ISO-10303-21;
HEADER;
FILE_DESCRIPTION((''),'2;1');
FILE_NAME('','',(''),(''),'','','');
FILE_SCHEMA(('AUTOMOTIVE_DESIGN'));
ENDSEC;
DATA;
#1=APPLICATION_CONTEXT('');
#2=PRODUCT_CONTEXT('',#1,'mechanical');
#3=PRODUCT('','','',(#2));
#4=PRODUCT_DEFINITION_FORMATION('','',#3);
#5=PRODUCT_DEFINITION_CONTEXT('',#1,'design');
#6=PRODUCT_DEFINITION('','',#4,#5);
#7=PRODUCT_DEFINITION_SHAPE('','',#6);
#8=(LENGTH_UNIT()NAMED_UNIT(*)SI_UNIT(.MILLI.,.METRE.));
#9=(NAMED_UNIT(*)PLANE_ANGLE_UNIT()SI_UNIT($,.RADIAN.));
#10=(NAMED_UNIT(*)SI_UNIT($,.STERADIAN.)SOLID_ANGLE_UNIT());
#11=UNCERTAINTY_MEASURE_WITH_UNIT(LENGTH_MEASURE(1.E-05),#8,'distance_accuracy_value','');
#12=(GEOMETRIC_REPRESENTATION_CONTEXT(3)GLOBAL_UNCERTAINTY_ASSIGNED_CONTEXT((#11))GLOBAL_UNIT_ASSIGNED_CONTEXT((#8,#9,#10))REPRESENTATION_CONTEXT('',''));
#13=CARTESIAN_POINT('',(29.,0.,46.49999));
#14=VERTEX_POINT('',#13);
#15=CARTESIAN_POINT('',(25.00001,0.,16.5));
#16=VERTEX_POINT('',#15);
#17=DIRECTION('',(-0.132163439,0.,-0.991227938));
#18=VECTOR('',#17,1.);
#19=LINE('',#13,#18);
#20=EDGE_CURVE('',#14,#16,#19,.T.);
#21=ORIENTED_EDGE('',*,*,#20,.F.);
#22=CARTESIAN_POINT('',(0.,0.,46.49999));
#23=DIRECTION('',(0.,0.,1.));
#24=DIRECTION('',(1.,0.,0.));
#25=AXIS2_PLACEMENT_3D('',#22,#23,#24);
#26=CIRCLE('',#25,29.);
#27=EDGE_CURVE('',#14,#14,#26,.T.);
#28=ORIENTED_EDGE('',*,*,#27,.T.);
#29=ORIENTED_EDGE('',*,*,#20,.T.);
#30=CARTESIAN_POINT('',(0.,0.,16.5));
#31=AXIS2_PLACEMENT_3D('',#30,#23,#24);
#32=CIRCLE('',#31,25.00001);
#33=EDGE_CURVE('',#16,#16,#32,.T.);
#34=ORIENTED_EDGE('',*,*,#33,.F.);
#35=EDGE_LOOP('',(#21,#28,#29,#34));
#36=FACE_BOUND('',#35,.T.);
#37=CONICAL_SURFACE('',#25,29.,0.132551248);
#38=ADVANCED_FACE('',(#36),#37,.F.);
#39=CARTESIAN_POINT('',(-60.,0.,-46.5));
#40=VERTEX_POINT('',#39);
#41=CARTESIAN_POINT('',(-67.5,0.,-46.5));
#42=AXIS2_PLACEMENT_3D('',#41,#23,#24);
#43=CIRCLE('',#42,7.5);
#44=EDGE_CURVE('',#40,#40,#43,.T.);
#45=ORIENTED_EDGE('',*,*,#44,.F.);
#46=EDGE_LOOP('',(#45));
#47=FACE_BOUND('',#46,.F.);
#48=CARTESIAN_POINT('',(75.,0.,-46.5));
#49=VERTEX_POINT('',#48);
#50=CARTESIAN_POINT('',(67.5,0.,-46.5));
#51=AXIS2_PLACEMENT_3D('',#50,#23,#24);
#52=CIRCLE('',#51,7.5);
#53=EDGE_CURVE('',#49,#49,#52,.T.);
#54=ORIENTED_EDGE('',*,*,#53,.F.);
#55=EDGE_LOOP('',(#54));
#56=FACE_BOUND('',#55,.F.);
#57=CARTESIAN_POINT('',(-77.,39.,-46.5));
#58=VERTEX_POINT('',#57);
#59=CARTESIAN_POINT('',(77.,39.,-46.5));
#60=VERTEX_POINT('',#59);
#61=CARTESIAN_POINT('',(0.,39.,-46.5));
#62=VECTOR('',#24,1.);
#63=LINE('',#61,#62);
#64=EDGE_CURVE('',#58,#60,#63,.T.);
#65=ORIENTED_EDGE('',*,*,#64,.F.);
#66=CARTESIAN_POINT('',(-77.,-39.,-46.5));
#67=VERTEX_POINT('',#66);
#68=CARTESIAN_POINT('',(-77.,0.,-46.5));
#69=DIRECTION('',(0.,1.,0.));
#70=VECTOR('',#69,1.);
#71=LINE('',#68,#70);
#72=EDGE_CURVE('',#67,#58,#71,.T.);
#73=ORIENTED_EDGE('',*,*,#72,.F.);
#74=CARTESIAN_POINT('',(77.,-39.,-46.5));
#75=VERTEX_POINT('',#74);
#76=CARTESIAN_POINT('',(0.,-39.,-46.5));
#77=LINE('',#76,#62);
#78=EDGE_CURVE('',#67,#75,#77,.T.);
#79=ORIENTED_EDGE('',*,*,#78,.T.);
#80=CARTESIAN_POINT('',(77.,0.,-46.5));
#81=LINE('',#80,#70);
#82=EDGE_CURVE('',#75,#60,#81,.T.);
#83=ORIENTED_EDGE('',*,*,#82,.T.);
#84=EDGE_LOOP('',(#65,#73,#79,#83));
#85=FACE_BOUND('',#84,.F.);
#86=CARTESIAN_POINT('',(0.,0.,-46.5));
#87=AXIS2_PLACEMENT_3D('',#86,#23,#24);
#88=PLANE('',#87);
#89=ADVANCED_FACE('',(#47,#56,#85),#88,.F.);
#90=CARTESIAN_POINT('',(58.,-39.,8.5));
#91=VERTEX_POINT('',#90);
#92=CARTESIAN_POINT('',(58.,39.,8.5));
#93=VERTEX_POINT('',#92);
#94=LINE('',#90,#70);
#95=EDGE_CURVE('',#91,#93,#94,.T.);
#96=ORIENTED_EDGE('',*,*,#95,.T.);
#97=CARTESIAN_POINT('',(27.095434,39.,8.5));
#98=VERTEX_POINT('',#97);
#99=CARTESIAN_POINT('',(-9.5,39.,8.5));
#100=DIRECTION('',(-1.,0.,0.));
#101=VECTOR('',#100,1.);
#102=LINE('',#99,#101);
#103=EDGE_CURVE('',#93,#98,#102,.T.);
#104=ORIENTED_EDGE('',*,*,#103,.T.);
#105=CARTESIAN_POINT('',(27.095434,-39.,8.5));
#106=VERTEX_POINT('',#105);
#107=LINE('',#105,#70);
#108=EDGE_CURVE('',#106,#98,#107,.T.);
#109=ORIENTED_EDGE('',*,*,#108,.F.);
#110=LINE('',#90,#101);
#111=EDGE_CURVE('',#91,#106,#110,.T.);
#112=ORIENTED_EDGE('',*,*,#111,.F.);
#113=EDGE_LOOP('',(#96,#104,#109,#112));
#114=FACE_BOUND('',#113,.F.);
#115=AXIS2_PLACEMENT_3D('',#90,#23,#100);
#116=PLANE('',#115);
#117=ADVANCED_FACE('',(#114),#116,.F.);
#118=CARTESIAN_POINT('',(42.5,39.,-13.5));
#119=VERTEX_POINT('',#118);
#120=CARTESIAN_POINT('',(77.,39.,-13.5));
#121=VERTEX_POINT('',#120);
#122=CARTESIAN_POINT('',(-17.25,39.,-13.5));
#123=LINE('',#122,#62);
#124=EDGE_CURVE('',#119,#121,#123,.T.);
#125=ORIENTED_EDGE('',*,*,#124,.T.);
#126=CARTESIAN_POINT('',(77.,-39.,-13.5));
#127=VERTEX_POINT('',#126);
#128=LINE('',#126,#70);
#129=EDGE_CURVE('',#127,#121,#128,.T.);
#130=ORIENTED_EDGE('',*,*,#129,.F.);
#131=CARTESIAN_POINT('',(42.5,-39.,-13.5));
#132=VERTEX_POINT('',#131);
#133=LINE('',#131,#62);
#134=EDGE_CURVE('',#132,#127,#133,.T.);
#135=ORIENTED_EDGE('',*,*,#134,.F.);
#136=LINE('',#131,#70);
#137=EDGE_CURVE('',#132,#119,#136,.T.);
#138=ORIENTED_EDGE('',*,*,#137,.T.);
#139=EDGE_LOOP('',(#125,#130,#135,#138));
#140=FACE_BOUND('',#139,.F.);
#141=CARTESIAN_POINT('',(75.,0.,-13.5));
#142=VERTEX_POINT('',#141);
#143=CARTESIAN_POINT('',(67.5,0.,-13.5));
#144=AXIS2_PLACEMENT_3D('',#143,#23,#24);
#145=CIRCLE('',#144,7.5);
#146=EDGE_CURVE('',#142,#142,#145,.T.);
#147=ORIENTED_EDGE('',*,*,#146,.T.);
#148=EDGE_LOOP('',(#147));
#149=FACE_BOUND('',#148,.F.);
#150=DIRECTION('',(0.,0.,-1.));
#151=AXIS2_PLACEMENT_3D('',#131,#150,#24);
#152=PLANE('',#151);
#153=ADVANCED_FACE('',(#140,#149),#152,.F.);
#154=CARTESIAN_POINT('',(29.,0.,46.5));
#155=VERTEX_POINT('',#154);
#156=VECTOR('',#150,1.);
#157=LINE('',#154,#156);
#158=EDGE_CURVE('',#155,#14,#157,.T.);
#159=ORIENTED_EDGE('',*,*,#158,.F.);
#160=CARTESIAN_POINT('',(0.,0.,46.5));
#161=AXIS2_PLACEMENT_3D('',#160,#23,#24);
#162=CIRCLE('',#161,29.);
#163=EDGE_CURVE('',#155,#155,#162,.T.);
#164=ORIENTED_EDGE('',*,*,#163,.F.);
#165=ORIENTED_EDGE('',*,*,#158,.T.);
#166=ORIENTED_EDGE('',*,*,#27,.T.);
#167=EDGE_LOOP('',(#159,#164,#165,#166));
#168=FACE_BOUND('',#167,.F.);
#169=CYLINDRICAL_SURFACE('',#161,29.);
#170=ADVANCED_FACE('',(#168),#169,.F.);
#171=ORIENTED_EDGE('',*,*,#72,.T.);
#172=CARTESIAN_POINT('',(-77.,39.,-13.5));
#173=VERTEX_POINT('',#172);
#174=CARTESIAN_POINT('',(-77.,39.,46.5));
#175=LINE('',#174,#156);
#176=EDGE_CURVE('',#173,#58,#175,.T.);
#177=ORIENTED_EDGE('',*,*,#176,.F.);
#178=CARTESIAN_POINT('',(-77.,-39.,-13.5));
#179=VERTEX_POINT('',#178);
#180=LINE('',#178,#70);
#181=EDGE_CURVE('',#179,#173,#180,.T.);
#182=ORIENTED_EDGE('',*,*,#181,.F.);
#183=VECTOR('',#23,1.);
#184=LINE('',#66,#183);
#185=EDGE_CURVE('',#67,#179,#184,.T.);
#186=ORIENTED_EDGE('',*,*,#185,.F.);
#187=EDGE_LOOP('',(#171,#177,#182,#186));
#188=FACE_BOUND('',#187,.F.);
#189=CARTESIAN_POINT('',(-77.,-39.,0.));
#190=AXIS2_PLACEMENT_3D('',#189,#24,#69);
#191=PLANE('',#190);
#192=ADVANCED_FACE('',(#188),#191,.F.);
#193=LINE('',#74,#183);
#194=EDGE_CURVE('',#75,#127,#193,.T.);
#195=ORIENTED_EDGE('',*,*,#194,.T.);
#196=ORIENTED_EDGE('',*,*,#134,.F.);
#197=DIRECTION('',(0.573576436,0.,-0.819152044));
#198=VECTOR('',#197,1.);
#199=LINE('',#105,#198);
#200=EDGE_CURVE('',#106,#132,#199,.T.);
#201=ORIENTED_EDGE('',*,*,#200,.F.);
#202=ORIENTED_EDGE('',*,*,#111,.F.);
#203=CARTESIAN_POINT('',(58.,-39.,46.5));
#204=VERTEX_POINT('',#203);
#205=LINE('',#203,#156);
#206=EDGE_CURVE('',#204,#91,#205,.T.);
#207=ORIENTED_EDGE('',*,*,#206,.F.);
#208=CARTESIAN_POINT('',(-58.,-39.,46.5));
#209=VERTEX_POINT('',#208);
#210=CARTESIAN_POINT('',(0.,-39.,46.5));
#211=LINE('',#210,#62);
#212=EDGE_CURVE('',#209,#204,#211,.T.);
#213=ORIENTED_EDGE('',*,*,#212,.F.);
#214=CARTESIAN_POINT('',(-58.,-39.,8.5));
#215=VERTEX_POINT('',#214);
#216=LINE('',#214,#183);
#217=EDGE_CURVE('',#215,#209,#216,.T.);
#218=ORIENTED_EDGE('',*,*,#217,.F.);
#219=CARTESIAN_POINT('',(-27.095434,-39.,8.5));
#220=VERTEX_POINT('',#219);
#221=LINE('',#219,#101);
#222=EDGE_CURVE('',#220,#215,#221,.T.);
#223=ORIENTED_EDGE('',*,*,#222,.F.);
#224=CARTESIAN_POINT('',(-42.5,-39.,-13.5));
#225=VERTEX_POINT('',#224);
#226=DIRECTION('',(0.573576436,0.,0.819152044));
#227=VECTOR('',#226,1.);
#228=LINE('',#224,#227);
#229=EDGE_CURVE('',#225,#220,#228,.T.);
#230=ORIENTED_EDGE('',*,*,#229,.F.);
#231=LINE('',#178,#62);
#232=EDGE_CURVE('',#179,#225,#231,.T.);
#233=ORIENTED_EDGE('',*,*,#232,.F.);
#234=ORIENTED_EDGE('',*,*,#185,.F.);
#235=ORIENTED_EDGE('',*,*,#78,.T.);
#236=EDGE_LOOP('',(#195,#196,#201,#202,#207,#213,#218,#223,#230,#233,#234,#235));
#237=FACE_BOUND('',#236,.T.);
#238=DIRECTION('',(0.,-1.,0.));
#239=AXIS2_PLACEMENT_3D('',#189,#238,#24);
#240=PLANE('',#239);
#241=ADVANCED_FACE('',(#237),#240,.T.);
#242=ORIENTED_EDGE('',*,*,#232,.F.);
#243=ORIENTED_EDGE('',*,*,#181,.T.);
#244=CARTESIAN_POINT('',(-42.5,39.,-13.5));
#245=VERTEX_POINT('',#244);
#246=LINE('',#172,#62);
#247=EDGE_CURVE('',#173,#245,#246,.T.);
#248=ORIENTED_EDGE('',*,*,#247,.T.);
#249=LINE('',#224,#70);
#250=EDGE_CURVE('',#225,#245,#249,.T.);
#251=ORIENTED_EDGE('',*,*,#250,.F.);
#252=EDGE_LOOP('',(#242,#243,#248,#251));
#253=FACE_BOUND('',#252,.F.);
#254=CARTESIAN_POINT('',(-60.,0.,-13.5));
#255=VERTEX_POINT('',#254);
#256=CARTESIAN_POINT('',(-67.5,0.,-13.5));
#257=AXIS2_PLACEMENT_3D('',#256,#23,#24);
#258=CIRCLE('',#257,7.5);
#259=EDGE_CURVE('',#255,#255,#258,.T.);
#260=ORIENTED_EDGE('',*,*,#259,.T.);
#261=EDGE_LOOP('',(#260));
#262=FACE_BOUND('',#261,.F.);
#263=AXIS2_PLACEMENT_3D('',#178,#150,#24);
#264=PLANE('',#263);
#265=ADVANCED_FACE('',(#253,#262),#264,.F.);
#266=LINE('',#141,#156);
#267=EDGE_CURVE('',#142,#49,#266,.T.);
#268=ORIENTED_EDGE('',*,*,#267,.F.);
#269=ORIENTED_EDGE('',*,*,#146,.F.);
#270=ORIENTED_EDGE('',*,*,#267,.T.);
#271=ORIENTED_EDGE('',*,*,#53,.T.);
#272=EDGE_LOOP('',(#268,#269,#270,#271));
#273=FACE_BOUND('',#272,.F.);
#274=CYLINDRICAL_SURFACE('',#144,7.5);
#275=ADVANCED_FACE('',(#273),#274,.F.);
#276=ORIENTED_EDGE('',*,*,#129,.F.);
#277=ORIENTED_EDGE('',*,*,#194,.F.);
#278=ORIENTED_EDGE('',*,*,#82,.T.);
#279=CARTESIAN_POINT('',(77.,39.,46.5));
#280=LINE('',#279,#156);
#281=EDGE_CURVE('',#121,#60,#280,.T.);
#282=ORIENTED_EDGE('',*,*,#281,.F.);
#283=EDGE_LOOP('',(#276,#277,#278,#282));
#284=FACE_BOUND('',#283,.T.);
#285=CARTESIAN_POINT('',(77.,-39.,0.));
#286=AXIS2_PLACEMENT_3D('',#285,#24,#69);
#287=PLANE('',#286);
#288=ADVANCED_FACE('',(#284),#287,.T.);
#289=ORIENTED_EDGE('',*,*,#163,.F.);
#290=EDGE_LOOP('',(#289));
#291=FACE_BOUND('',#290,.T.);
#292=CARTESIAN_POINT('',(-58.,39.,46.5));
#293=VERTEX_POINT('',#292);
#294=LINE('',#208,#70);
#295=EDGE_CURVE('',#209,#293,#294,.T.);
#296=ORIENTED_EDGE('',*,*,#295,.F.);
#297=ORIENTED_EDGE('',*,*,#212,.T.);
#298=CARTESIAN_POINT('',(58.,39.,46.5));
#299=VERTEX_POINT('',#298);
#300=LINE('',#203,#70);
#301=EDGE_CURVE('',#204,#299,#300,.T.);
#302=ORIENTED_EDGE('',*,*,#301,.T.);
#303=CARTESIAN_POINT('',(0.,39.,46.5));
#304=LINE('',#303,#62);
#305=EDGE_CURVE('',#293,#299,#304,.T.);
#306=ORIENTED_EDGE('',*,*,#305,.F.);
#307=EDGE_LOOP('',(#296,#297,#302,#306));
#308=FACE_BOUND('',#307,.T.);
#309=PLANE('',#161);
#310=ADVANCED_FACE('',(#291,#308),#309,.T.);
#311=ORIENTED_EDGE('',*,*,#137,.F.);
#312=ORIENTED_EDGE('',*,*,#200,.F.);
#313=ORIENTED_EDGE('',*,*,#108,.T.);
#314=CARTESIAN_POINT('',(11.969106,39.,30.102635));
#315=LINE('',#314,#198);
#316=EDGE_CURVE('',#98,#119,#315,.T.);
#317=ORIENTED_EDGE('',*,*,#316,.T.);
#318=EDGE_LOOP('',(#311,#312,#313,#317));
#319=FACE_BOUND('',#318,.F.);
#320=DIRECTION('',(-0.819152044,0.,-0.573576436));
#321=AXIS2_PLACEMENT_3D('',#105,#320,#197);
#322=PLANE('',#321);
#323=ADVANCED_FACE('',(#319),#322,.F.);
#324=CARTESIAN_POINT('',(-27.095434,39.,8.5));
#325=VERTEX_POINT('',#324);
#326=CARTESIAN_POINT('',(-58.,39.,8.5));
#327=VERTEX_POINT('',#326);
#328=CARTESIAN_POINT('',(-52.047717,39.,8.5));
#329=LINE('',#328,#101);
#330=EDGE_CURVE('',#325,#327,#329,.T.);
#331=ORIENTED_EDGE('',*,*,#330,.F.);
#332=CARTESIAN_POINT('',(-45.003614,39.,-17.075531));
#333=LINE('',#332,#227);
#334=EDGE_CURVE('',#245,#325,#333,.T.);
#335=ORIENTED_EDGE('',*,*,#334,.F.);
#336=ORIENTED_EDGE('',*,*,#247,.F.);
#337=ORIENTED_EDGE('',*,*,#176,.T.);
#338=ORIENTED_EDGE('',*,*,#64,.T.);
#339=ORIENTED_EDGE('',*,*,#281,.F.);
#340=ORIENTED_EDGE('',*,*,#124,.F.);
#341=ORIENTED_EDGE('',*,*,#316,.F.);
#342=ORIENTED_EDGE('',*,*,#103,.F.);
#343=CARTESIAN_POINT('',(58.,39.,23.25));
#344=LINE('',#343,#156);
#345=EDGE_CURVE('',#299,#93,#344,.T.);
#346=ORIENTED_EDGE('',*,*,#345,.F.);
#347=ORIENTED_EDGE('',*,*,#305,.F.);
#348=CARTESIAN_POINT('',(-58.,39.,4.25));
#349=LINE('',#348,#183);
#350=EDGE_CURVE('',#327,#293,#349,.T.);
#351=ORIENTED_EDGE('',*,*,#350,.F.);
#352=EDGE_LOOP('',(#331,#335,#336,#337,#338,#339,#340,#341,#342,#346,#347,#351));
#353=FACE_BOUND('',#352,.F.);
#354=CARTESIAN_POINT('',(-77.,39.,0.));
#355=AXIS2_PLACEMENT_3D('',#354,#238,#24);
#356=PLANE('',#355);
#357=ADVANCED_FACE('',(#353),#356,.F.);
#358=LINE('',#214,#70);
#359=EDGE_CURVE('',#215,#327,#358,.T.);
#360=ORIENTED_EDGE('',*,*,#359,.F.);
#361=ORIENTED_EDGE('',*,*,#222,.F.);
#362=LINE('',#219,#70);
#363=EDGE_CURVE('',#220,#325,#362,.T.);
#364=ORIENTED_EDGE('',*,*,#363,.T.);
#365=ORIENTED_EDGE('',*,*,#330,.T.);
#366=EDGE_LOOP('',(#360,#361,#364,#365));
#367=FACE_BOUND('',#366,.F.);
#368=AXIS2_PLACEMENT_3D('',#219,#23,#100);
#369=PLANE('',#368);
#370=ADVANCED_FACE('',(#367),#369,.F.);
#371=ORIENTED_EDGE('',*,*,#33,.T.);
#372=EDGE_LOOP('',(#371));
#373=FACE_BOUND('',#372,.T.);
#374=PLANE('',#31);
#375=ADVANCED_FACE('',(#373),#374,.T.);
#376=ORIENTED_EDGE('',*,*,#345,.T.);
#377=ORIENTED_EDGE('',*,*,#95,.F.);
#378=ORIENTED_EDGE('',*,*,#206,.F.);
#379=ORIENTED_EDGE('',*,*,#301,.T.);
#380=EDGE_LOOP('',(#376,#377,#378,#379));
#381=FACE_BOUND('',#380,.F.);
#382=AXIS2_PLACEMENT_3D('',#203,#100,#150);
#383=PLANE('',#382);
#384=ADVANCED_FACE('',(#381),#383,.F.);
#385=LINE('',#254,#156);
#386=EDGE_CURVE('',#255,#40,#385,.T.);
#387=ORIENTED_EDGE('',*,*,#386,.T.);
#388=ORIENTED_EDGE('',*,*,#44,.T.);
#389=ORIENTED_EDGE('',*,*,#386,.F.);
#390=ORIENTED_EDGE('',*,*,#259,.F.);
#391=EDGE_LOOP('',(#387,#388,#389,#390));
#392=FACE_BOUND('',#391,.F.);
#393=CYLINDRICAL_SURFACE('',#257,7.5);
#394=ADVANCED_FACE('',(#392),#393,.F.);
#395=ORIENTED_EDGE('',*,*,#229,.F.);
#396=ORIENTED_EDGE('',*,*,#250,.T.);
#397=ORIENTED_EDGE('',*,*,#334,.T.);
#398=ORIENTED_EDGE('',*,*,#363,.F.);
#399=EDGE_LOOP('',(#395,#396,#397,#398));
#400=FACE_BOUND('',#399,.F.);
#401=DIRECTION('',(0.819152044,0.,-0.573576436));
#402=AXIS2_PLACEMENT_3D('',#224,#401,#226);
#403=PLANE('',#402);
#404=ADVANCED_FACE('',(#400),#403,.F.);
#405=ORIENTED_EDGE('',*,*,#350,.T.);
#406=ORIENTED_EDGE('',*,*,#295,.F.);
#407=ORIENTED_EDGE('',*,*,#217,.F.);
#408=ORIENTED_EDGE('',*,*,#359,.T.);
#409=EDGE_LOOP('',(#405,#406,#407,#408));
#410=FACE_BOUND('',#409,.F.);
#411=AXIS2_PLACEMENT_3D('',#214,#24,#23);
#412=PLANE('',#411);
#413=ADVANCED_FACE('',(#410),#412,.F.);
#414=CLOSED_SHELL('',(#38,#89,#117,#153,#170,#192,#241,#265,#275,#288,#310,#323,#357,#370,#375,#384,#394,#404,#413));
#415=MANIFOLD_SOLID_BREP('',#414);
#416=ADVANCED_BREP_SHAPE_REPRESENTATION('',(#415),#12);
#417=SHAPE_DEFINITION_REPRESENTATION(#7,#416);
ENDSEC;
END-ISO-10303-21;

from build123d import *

# Parameters (mm, degrees)
F0_W      = 154
F0_H      = 78
F1_DEPTH  = 46.5
F3_DEPTH  = 80
F4_R      = 7.5
F5_DEPTH  = 50
F6_R      = 29
F7_DEPTH  = 30
F8_SIZE2  = 3.99999
F8_SIZE   = 29.99999
F9_R      = 7.5
F10_DEPTH = 40


# Not quite as in the source:
# - a fillet or chamfer is up to 0.001 mm smaller than in the source, because OpenCascade refuses the exact size


with BuildPart() as f1:
    # F0 (on Top) → F1 (new body, symmetric)
    with BuildSketch(Plane.XY):
        Rectangle(F0_W, F0_H)
    extrude(amount=F1_DEPTH, both=True)

    # F2 (on face) → F3 (cut)
    with BuildSketch(Plane.XZ.offset(39)):
        Polygon((-77, 46.5), (-77, -13.5), (-42.5, -13.5), (-27.0954341594, 8.5), (-58, 8.5), (-58, 46.5), align=None)
        Polygon((77, 46.5), (58, 46.5), (58, 8.5), (27.0954341594, 8.5), (42.5, -13.5), (77, -13.5), align=None)
    extrude(amount=-F3_DEPTH, mode=Mode.SUBTRACT)

    # F4 (on face) → F5 (cut)
    with BuildSketch(Plane.XY.offset(-13.5)):
        with Locations((-67.5, 0)):
            Circle(F4_R)
    extrude(amount=-F5_DEPTH, mode=Mode.SUBTRACT)

    # F6 (on face) → F7 (cut)
    with BuildSketch(Plane.XY.offset(46.5)):
        Circle(F6_R)
    extrude(amount=-F7_DEPTH, mode=Mode.SUBTRACT)

    # F8 (size 30 and 4 in the source; OpenCascade refuses exactly that, so slightly less here)
    f8_edges = [f1.edges().sort_by_distance(p)[0] for p in [
        (-29, 0, 16.5),
    ]]
    f8_side = f1.faces().sort_by_distance((-29, 0, 31.5))[0]
    chamfer(f8_edges, length=F8_SIZE, length2=F8_SIZE2, reference=f8_side)

    # F9 (on face) → F10 (cut)
    with BuildSketch(Plane.XY.offset(-13.5)):
        with Locations((67.5, 0)):
            Circle(F9_R)
    extrude(amount=-F10_DEPTH, mode=Mode.SUBTRACT)


solid = f1.part
